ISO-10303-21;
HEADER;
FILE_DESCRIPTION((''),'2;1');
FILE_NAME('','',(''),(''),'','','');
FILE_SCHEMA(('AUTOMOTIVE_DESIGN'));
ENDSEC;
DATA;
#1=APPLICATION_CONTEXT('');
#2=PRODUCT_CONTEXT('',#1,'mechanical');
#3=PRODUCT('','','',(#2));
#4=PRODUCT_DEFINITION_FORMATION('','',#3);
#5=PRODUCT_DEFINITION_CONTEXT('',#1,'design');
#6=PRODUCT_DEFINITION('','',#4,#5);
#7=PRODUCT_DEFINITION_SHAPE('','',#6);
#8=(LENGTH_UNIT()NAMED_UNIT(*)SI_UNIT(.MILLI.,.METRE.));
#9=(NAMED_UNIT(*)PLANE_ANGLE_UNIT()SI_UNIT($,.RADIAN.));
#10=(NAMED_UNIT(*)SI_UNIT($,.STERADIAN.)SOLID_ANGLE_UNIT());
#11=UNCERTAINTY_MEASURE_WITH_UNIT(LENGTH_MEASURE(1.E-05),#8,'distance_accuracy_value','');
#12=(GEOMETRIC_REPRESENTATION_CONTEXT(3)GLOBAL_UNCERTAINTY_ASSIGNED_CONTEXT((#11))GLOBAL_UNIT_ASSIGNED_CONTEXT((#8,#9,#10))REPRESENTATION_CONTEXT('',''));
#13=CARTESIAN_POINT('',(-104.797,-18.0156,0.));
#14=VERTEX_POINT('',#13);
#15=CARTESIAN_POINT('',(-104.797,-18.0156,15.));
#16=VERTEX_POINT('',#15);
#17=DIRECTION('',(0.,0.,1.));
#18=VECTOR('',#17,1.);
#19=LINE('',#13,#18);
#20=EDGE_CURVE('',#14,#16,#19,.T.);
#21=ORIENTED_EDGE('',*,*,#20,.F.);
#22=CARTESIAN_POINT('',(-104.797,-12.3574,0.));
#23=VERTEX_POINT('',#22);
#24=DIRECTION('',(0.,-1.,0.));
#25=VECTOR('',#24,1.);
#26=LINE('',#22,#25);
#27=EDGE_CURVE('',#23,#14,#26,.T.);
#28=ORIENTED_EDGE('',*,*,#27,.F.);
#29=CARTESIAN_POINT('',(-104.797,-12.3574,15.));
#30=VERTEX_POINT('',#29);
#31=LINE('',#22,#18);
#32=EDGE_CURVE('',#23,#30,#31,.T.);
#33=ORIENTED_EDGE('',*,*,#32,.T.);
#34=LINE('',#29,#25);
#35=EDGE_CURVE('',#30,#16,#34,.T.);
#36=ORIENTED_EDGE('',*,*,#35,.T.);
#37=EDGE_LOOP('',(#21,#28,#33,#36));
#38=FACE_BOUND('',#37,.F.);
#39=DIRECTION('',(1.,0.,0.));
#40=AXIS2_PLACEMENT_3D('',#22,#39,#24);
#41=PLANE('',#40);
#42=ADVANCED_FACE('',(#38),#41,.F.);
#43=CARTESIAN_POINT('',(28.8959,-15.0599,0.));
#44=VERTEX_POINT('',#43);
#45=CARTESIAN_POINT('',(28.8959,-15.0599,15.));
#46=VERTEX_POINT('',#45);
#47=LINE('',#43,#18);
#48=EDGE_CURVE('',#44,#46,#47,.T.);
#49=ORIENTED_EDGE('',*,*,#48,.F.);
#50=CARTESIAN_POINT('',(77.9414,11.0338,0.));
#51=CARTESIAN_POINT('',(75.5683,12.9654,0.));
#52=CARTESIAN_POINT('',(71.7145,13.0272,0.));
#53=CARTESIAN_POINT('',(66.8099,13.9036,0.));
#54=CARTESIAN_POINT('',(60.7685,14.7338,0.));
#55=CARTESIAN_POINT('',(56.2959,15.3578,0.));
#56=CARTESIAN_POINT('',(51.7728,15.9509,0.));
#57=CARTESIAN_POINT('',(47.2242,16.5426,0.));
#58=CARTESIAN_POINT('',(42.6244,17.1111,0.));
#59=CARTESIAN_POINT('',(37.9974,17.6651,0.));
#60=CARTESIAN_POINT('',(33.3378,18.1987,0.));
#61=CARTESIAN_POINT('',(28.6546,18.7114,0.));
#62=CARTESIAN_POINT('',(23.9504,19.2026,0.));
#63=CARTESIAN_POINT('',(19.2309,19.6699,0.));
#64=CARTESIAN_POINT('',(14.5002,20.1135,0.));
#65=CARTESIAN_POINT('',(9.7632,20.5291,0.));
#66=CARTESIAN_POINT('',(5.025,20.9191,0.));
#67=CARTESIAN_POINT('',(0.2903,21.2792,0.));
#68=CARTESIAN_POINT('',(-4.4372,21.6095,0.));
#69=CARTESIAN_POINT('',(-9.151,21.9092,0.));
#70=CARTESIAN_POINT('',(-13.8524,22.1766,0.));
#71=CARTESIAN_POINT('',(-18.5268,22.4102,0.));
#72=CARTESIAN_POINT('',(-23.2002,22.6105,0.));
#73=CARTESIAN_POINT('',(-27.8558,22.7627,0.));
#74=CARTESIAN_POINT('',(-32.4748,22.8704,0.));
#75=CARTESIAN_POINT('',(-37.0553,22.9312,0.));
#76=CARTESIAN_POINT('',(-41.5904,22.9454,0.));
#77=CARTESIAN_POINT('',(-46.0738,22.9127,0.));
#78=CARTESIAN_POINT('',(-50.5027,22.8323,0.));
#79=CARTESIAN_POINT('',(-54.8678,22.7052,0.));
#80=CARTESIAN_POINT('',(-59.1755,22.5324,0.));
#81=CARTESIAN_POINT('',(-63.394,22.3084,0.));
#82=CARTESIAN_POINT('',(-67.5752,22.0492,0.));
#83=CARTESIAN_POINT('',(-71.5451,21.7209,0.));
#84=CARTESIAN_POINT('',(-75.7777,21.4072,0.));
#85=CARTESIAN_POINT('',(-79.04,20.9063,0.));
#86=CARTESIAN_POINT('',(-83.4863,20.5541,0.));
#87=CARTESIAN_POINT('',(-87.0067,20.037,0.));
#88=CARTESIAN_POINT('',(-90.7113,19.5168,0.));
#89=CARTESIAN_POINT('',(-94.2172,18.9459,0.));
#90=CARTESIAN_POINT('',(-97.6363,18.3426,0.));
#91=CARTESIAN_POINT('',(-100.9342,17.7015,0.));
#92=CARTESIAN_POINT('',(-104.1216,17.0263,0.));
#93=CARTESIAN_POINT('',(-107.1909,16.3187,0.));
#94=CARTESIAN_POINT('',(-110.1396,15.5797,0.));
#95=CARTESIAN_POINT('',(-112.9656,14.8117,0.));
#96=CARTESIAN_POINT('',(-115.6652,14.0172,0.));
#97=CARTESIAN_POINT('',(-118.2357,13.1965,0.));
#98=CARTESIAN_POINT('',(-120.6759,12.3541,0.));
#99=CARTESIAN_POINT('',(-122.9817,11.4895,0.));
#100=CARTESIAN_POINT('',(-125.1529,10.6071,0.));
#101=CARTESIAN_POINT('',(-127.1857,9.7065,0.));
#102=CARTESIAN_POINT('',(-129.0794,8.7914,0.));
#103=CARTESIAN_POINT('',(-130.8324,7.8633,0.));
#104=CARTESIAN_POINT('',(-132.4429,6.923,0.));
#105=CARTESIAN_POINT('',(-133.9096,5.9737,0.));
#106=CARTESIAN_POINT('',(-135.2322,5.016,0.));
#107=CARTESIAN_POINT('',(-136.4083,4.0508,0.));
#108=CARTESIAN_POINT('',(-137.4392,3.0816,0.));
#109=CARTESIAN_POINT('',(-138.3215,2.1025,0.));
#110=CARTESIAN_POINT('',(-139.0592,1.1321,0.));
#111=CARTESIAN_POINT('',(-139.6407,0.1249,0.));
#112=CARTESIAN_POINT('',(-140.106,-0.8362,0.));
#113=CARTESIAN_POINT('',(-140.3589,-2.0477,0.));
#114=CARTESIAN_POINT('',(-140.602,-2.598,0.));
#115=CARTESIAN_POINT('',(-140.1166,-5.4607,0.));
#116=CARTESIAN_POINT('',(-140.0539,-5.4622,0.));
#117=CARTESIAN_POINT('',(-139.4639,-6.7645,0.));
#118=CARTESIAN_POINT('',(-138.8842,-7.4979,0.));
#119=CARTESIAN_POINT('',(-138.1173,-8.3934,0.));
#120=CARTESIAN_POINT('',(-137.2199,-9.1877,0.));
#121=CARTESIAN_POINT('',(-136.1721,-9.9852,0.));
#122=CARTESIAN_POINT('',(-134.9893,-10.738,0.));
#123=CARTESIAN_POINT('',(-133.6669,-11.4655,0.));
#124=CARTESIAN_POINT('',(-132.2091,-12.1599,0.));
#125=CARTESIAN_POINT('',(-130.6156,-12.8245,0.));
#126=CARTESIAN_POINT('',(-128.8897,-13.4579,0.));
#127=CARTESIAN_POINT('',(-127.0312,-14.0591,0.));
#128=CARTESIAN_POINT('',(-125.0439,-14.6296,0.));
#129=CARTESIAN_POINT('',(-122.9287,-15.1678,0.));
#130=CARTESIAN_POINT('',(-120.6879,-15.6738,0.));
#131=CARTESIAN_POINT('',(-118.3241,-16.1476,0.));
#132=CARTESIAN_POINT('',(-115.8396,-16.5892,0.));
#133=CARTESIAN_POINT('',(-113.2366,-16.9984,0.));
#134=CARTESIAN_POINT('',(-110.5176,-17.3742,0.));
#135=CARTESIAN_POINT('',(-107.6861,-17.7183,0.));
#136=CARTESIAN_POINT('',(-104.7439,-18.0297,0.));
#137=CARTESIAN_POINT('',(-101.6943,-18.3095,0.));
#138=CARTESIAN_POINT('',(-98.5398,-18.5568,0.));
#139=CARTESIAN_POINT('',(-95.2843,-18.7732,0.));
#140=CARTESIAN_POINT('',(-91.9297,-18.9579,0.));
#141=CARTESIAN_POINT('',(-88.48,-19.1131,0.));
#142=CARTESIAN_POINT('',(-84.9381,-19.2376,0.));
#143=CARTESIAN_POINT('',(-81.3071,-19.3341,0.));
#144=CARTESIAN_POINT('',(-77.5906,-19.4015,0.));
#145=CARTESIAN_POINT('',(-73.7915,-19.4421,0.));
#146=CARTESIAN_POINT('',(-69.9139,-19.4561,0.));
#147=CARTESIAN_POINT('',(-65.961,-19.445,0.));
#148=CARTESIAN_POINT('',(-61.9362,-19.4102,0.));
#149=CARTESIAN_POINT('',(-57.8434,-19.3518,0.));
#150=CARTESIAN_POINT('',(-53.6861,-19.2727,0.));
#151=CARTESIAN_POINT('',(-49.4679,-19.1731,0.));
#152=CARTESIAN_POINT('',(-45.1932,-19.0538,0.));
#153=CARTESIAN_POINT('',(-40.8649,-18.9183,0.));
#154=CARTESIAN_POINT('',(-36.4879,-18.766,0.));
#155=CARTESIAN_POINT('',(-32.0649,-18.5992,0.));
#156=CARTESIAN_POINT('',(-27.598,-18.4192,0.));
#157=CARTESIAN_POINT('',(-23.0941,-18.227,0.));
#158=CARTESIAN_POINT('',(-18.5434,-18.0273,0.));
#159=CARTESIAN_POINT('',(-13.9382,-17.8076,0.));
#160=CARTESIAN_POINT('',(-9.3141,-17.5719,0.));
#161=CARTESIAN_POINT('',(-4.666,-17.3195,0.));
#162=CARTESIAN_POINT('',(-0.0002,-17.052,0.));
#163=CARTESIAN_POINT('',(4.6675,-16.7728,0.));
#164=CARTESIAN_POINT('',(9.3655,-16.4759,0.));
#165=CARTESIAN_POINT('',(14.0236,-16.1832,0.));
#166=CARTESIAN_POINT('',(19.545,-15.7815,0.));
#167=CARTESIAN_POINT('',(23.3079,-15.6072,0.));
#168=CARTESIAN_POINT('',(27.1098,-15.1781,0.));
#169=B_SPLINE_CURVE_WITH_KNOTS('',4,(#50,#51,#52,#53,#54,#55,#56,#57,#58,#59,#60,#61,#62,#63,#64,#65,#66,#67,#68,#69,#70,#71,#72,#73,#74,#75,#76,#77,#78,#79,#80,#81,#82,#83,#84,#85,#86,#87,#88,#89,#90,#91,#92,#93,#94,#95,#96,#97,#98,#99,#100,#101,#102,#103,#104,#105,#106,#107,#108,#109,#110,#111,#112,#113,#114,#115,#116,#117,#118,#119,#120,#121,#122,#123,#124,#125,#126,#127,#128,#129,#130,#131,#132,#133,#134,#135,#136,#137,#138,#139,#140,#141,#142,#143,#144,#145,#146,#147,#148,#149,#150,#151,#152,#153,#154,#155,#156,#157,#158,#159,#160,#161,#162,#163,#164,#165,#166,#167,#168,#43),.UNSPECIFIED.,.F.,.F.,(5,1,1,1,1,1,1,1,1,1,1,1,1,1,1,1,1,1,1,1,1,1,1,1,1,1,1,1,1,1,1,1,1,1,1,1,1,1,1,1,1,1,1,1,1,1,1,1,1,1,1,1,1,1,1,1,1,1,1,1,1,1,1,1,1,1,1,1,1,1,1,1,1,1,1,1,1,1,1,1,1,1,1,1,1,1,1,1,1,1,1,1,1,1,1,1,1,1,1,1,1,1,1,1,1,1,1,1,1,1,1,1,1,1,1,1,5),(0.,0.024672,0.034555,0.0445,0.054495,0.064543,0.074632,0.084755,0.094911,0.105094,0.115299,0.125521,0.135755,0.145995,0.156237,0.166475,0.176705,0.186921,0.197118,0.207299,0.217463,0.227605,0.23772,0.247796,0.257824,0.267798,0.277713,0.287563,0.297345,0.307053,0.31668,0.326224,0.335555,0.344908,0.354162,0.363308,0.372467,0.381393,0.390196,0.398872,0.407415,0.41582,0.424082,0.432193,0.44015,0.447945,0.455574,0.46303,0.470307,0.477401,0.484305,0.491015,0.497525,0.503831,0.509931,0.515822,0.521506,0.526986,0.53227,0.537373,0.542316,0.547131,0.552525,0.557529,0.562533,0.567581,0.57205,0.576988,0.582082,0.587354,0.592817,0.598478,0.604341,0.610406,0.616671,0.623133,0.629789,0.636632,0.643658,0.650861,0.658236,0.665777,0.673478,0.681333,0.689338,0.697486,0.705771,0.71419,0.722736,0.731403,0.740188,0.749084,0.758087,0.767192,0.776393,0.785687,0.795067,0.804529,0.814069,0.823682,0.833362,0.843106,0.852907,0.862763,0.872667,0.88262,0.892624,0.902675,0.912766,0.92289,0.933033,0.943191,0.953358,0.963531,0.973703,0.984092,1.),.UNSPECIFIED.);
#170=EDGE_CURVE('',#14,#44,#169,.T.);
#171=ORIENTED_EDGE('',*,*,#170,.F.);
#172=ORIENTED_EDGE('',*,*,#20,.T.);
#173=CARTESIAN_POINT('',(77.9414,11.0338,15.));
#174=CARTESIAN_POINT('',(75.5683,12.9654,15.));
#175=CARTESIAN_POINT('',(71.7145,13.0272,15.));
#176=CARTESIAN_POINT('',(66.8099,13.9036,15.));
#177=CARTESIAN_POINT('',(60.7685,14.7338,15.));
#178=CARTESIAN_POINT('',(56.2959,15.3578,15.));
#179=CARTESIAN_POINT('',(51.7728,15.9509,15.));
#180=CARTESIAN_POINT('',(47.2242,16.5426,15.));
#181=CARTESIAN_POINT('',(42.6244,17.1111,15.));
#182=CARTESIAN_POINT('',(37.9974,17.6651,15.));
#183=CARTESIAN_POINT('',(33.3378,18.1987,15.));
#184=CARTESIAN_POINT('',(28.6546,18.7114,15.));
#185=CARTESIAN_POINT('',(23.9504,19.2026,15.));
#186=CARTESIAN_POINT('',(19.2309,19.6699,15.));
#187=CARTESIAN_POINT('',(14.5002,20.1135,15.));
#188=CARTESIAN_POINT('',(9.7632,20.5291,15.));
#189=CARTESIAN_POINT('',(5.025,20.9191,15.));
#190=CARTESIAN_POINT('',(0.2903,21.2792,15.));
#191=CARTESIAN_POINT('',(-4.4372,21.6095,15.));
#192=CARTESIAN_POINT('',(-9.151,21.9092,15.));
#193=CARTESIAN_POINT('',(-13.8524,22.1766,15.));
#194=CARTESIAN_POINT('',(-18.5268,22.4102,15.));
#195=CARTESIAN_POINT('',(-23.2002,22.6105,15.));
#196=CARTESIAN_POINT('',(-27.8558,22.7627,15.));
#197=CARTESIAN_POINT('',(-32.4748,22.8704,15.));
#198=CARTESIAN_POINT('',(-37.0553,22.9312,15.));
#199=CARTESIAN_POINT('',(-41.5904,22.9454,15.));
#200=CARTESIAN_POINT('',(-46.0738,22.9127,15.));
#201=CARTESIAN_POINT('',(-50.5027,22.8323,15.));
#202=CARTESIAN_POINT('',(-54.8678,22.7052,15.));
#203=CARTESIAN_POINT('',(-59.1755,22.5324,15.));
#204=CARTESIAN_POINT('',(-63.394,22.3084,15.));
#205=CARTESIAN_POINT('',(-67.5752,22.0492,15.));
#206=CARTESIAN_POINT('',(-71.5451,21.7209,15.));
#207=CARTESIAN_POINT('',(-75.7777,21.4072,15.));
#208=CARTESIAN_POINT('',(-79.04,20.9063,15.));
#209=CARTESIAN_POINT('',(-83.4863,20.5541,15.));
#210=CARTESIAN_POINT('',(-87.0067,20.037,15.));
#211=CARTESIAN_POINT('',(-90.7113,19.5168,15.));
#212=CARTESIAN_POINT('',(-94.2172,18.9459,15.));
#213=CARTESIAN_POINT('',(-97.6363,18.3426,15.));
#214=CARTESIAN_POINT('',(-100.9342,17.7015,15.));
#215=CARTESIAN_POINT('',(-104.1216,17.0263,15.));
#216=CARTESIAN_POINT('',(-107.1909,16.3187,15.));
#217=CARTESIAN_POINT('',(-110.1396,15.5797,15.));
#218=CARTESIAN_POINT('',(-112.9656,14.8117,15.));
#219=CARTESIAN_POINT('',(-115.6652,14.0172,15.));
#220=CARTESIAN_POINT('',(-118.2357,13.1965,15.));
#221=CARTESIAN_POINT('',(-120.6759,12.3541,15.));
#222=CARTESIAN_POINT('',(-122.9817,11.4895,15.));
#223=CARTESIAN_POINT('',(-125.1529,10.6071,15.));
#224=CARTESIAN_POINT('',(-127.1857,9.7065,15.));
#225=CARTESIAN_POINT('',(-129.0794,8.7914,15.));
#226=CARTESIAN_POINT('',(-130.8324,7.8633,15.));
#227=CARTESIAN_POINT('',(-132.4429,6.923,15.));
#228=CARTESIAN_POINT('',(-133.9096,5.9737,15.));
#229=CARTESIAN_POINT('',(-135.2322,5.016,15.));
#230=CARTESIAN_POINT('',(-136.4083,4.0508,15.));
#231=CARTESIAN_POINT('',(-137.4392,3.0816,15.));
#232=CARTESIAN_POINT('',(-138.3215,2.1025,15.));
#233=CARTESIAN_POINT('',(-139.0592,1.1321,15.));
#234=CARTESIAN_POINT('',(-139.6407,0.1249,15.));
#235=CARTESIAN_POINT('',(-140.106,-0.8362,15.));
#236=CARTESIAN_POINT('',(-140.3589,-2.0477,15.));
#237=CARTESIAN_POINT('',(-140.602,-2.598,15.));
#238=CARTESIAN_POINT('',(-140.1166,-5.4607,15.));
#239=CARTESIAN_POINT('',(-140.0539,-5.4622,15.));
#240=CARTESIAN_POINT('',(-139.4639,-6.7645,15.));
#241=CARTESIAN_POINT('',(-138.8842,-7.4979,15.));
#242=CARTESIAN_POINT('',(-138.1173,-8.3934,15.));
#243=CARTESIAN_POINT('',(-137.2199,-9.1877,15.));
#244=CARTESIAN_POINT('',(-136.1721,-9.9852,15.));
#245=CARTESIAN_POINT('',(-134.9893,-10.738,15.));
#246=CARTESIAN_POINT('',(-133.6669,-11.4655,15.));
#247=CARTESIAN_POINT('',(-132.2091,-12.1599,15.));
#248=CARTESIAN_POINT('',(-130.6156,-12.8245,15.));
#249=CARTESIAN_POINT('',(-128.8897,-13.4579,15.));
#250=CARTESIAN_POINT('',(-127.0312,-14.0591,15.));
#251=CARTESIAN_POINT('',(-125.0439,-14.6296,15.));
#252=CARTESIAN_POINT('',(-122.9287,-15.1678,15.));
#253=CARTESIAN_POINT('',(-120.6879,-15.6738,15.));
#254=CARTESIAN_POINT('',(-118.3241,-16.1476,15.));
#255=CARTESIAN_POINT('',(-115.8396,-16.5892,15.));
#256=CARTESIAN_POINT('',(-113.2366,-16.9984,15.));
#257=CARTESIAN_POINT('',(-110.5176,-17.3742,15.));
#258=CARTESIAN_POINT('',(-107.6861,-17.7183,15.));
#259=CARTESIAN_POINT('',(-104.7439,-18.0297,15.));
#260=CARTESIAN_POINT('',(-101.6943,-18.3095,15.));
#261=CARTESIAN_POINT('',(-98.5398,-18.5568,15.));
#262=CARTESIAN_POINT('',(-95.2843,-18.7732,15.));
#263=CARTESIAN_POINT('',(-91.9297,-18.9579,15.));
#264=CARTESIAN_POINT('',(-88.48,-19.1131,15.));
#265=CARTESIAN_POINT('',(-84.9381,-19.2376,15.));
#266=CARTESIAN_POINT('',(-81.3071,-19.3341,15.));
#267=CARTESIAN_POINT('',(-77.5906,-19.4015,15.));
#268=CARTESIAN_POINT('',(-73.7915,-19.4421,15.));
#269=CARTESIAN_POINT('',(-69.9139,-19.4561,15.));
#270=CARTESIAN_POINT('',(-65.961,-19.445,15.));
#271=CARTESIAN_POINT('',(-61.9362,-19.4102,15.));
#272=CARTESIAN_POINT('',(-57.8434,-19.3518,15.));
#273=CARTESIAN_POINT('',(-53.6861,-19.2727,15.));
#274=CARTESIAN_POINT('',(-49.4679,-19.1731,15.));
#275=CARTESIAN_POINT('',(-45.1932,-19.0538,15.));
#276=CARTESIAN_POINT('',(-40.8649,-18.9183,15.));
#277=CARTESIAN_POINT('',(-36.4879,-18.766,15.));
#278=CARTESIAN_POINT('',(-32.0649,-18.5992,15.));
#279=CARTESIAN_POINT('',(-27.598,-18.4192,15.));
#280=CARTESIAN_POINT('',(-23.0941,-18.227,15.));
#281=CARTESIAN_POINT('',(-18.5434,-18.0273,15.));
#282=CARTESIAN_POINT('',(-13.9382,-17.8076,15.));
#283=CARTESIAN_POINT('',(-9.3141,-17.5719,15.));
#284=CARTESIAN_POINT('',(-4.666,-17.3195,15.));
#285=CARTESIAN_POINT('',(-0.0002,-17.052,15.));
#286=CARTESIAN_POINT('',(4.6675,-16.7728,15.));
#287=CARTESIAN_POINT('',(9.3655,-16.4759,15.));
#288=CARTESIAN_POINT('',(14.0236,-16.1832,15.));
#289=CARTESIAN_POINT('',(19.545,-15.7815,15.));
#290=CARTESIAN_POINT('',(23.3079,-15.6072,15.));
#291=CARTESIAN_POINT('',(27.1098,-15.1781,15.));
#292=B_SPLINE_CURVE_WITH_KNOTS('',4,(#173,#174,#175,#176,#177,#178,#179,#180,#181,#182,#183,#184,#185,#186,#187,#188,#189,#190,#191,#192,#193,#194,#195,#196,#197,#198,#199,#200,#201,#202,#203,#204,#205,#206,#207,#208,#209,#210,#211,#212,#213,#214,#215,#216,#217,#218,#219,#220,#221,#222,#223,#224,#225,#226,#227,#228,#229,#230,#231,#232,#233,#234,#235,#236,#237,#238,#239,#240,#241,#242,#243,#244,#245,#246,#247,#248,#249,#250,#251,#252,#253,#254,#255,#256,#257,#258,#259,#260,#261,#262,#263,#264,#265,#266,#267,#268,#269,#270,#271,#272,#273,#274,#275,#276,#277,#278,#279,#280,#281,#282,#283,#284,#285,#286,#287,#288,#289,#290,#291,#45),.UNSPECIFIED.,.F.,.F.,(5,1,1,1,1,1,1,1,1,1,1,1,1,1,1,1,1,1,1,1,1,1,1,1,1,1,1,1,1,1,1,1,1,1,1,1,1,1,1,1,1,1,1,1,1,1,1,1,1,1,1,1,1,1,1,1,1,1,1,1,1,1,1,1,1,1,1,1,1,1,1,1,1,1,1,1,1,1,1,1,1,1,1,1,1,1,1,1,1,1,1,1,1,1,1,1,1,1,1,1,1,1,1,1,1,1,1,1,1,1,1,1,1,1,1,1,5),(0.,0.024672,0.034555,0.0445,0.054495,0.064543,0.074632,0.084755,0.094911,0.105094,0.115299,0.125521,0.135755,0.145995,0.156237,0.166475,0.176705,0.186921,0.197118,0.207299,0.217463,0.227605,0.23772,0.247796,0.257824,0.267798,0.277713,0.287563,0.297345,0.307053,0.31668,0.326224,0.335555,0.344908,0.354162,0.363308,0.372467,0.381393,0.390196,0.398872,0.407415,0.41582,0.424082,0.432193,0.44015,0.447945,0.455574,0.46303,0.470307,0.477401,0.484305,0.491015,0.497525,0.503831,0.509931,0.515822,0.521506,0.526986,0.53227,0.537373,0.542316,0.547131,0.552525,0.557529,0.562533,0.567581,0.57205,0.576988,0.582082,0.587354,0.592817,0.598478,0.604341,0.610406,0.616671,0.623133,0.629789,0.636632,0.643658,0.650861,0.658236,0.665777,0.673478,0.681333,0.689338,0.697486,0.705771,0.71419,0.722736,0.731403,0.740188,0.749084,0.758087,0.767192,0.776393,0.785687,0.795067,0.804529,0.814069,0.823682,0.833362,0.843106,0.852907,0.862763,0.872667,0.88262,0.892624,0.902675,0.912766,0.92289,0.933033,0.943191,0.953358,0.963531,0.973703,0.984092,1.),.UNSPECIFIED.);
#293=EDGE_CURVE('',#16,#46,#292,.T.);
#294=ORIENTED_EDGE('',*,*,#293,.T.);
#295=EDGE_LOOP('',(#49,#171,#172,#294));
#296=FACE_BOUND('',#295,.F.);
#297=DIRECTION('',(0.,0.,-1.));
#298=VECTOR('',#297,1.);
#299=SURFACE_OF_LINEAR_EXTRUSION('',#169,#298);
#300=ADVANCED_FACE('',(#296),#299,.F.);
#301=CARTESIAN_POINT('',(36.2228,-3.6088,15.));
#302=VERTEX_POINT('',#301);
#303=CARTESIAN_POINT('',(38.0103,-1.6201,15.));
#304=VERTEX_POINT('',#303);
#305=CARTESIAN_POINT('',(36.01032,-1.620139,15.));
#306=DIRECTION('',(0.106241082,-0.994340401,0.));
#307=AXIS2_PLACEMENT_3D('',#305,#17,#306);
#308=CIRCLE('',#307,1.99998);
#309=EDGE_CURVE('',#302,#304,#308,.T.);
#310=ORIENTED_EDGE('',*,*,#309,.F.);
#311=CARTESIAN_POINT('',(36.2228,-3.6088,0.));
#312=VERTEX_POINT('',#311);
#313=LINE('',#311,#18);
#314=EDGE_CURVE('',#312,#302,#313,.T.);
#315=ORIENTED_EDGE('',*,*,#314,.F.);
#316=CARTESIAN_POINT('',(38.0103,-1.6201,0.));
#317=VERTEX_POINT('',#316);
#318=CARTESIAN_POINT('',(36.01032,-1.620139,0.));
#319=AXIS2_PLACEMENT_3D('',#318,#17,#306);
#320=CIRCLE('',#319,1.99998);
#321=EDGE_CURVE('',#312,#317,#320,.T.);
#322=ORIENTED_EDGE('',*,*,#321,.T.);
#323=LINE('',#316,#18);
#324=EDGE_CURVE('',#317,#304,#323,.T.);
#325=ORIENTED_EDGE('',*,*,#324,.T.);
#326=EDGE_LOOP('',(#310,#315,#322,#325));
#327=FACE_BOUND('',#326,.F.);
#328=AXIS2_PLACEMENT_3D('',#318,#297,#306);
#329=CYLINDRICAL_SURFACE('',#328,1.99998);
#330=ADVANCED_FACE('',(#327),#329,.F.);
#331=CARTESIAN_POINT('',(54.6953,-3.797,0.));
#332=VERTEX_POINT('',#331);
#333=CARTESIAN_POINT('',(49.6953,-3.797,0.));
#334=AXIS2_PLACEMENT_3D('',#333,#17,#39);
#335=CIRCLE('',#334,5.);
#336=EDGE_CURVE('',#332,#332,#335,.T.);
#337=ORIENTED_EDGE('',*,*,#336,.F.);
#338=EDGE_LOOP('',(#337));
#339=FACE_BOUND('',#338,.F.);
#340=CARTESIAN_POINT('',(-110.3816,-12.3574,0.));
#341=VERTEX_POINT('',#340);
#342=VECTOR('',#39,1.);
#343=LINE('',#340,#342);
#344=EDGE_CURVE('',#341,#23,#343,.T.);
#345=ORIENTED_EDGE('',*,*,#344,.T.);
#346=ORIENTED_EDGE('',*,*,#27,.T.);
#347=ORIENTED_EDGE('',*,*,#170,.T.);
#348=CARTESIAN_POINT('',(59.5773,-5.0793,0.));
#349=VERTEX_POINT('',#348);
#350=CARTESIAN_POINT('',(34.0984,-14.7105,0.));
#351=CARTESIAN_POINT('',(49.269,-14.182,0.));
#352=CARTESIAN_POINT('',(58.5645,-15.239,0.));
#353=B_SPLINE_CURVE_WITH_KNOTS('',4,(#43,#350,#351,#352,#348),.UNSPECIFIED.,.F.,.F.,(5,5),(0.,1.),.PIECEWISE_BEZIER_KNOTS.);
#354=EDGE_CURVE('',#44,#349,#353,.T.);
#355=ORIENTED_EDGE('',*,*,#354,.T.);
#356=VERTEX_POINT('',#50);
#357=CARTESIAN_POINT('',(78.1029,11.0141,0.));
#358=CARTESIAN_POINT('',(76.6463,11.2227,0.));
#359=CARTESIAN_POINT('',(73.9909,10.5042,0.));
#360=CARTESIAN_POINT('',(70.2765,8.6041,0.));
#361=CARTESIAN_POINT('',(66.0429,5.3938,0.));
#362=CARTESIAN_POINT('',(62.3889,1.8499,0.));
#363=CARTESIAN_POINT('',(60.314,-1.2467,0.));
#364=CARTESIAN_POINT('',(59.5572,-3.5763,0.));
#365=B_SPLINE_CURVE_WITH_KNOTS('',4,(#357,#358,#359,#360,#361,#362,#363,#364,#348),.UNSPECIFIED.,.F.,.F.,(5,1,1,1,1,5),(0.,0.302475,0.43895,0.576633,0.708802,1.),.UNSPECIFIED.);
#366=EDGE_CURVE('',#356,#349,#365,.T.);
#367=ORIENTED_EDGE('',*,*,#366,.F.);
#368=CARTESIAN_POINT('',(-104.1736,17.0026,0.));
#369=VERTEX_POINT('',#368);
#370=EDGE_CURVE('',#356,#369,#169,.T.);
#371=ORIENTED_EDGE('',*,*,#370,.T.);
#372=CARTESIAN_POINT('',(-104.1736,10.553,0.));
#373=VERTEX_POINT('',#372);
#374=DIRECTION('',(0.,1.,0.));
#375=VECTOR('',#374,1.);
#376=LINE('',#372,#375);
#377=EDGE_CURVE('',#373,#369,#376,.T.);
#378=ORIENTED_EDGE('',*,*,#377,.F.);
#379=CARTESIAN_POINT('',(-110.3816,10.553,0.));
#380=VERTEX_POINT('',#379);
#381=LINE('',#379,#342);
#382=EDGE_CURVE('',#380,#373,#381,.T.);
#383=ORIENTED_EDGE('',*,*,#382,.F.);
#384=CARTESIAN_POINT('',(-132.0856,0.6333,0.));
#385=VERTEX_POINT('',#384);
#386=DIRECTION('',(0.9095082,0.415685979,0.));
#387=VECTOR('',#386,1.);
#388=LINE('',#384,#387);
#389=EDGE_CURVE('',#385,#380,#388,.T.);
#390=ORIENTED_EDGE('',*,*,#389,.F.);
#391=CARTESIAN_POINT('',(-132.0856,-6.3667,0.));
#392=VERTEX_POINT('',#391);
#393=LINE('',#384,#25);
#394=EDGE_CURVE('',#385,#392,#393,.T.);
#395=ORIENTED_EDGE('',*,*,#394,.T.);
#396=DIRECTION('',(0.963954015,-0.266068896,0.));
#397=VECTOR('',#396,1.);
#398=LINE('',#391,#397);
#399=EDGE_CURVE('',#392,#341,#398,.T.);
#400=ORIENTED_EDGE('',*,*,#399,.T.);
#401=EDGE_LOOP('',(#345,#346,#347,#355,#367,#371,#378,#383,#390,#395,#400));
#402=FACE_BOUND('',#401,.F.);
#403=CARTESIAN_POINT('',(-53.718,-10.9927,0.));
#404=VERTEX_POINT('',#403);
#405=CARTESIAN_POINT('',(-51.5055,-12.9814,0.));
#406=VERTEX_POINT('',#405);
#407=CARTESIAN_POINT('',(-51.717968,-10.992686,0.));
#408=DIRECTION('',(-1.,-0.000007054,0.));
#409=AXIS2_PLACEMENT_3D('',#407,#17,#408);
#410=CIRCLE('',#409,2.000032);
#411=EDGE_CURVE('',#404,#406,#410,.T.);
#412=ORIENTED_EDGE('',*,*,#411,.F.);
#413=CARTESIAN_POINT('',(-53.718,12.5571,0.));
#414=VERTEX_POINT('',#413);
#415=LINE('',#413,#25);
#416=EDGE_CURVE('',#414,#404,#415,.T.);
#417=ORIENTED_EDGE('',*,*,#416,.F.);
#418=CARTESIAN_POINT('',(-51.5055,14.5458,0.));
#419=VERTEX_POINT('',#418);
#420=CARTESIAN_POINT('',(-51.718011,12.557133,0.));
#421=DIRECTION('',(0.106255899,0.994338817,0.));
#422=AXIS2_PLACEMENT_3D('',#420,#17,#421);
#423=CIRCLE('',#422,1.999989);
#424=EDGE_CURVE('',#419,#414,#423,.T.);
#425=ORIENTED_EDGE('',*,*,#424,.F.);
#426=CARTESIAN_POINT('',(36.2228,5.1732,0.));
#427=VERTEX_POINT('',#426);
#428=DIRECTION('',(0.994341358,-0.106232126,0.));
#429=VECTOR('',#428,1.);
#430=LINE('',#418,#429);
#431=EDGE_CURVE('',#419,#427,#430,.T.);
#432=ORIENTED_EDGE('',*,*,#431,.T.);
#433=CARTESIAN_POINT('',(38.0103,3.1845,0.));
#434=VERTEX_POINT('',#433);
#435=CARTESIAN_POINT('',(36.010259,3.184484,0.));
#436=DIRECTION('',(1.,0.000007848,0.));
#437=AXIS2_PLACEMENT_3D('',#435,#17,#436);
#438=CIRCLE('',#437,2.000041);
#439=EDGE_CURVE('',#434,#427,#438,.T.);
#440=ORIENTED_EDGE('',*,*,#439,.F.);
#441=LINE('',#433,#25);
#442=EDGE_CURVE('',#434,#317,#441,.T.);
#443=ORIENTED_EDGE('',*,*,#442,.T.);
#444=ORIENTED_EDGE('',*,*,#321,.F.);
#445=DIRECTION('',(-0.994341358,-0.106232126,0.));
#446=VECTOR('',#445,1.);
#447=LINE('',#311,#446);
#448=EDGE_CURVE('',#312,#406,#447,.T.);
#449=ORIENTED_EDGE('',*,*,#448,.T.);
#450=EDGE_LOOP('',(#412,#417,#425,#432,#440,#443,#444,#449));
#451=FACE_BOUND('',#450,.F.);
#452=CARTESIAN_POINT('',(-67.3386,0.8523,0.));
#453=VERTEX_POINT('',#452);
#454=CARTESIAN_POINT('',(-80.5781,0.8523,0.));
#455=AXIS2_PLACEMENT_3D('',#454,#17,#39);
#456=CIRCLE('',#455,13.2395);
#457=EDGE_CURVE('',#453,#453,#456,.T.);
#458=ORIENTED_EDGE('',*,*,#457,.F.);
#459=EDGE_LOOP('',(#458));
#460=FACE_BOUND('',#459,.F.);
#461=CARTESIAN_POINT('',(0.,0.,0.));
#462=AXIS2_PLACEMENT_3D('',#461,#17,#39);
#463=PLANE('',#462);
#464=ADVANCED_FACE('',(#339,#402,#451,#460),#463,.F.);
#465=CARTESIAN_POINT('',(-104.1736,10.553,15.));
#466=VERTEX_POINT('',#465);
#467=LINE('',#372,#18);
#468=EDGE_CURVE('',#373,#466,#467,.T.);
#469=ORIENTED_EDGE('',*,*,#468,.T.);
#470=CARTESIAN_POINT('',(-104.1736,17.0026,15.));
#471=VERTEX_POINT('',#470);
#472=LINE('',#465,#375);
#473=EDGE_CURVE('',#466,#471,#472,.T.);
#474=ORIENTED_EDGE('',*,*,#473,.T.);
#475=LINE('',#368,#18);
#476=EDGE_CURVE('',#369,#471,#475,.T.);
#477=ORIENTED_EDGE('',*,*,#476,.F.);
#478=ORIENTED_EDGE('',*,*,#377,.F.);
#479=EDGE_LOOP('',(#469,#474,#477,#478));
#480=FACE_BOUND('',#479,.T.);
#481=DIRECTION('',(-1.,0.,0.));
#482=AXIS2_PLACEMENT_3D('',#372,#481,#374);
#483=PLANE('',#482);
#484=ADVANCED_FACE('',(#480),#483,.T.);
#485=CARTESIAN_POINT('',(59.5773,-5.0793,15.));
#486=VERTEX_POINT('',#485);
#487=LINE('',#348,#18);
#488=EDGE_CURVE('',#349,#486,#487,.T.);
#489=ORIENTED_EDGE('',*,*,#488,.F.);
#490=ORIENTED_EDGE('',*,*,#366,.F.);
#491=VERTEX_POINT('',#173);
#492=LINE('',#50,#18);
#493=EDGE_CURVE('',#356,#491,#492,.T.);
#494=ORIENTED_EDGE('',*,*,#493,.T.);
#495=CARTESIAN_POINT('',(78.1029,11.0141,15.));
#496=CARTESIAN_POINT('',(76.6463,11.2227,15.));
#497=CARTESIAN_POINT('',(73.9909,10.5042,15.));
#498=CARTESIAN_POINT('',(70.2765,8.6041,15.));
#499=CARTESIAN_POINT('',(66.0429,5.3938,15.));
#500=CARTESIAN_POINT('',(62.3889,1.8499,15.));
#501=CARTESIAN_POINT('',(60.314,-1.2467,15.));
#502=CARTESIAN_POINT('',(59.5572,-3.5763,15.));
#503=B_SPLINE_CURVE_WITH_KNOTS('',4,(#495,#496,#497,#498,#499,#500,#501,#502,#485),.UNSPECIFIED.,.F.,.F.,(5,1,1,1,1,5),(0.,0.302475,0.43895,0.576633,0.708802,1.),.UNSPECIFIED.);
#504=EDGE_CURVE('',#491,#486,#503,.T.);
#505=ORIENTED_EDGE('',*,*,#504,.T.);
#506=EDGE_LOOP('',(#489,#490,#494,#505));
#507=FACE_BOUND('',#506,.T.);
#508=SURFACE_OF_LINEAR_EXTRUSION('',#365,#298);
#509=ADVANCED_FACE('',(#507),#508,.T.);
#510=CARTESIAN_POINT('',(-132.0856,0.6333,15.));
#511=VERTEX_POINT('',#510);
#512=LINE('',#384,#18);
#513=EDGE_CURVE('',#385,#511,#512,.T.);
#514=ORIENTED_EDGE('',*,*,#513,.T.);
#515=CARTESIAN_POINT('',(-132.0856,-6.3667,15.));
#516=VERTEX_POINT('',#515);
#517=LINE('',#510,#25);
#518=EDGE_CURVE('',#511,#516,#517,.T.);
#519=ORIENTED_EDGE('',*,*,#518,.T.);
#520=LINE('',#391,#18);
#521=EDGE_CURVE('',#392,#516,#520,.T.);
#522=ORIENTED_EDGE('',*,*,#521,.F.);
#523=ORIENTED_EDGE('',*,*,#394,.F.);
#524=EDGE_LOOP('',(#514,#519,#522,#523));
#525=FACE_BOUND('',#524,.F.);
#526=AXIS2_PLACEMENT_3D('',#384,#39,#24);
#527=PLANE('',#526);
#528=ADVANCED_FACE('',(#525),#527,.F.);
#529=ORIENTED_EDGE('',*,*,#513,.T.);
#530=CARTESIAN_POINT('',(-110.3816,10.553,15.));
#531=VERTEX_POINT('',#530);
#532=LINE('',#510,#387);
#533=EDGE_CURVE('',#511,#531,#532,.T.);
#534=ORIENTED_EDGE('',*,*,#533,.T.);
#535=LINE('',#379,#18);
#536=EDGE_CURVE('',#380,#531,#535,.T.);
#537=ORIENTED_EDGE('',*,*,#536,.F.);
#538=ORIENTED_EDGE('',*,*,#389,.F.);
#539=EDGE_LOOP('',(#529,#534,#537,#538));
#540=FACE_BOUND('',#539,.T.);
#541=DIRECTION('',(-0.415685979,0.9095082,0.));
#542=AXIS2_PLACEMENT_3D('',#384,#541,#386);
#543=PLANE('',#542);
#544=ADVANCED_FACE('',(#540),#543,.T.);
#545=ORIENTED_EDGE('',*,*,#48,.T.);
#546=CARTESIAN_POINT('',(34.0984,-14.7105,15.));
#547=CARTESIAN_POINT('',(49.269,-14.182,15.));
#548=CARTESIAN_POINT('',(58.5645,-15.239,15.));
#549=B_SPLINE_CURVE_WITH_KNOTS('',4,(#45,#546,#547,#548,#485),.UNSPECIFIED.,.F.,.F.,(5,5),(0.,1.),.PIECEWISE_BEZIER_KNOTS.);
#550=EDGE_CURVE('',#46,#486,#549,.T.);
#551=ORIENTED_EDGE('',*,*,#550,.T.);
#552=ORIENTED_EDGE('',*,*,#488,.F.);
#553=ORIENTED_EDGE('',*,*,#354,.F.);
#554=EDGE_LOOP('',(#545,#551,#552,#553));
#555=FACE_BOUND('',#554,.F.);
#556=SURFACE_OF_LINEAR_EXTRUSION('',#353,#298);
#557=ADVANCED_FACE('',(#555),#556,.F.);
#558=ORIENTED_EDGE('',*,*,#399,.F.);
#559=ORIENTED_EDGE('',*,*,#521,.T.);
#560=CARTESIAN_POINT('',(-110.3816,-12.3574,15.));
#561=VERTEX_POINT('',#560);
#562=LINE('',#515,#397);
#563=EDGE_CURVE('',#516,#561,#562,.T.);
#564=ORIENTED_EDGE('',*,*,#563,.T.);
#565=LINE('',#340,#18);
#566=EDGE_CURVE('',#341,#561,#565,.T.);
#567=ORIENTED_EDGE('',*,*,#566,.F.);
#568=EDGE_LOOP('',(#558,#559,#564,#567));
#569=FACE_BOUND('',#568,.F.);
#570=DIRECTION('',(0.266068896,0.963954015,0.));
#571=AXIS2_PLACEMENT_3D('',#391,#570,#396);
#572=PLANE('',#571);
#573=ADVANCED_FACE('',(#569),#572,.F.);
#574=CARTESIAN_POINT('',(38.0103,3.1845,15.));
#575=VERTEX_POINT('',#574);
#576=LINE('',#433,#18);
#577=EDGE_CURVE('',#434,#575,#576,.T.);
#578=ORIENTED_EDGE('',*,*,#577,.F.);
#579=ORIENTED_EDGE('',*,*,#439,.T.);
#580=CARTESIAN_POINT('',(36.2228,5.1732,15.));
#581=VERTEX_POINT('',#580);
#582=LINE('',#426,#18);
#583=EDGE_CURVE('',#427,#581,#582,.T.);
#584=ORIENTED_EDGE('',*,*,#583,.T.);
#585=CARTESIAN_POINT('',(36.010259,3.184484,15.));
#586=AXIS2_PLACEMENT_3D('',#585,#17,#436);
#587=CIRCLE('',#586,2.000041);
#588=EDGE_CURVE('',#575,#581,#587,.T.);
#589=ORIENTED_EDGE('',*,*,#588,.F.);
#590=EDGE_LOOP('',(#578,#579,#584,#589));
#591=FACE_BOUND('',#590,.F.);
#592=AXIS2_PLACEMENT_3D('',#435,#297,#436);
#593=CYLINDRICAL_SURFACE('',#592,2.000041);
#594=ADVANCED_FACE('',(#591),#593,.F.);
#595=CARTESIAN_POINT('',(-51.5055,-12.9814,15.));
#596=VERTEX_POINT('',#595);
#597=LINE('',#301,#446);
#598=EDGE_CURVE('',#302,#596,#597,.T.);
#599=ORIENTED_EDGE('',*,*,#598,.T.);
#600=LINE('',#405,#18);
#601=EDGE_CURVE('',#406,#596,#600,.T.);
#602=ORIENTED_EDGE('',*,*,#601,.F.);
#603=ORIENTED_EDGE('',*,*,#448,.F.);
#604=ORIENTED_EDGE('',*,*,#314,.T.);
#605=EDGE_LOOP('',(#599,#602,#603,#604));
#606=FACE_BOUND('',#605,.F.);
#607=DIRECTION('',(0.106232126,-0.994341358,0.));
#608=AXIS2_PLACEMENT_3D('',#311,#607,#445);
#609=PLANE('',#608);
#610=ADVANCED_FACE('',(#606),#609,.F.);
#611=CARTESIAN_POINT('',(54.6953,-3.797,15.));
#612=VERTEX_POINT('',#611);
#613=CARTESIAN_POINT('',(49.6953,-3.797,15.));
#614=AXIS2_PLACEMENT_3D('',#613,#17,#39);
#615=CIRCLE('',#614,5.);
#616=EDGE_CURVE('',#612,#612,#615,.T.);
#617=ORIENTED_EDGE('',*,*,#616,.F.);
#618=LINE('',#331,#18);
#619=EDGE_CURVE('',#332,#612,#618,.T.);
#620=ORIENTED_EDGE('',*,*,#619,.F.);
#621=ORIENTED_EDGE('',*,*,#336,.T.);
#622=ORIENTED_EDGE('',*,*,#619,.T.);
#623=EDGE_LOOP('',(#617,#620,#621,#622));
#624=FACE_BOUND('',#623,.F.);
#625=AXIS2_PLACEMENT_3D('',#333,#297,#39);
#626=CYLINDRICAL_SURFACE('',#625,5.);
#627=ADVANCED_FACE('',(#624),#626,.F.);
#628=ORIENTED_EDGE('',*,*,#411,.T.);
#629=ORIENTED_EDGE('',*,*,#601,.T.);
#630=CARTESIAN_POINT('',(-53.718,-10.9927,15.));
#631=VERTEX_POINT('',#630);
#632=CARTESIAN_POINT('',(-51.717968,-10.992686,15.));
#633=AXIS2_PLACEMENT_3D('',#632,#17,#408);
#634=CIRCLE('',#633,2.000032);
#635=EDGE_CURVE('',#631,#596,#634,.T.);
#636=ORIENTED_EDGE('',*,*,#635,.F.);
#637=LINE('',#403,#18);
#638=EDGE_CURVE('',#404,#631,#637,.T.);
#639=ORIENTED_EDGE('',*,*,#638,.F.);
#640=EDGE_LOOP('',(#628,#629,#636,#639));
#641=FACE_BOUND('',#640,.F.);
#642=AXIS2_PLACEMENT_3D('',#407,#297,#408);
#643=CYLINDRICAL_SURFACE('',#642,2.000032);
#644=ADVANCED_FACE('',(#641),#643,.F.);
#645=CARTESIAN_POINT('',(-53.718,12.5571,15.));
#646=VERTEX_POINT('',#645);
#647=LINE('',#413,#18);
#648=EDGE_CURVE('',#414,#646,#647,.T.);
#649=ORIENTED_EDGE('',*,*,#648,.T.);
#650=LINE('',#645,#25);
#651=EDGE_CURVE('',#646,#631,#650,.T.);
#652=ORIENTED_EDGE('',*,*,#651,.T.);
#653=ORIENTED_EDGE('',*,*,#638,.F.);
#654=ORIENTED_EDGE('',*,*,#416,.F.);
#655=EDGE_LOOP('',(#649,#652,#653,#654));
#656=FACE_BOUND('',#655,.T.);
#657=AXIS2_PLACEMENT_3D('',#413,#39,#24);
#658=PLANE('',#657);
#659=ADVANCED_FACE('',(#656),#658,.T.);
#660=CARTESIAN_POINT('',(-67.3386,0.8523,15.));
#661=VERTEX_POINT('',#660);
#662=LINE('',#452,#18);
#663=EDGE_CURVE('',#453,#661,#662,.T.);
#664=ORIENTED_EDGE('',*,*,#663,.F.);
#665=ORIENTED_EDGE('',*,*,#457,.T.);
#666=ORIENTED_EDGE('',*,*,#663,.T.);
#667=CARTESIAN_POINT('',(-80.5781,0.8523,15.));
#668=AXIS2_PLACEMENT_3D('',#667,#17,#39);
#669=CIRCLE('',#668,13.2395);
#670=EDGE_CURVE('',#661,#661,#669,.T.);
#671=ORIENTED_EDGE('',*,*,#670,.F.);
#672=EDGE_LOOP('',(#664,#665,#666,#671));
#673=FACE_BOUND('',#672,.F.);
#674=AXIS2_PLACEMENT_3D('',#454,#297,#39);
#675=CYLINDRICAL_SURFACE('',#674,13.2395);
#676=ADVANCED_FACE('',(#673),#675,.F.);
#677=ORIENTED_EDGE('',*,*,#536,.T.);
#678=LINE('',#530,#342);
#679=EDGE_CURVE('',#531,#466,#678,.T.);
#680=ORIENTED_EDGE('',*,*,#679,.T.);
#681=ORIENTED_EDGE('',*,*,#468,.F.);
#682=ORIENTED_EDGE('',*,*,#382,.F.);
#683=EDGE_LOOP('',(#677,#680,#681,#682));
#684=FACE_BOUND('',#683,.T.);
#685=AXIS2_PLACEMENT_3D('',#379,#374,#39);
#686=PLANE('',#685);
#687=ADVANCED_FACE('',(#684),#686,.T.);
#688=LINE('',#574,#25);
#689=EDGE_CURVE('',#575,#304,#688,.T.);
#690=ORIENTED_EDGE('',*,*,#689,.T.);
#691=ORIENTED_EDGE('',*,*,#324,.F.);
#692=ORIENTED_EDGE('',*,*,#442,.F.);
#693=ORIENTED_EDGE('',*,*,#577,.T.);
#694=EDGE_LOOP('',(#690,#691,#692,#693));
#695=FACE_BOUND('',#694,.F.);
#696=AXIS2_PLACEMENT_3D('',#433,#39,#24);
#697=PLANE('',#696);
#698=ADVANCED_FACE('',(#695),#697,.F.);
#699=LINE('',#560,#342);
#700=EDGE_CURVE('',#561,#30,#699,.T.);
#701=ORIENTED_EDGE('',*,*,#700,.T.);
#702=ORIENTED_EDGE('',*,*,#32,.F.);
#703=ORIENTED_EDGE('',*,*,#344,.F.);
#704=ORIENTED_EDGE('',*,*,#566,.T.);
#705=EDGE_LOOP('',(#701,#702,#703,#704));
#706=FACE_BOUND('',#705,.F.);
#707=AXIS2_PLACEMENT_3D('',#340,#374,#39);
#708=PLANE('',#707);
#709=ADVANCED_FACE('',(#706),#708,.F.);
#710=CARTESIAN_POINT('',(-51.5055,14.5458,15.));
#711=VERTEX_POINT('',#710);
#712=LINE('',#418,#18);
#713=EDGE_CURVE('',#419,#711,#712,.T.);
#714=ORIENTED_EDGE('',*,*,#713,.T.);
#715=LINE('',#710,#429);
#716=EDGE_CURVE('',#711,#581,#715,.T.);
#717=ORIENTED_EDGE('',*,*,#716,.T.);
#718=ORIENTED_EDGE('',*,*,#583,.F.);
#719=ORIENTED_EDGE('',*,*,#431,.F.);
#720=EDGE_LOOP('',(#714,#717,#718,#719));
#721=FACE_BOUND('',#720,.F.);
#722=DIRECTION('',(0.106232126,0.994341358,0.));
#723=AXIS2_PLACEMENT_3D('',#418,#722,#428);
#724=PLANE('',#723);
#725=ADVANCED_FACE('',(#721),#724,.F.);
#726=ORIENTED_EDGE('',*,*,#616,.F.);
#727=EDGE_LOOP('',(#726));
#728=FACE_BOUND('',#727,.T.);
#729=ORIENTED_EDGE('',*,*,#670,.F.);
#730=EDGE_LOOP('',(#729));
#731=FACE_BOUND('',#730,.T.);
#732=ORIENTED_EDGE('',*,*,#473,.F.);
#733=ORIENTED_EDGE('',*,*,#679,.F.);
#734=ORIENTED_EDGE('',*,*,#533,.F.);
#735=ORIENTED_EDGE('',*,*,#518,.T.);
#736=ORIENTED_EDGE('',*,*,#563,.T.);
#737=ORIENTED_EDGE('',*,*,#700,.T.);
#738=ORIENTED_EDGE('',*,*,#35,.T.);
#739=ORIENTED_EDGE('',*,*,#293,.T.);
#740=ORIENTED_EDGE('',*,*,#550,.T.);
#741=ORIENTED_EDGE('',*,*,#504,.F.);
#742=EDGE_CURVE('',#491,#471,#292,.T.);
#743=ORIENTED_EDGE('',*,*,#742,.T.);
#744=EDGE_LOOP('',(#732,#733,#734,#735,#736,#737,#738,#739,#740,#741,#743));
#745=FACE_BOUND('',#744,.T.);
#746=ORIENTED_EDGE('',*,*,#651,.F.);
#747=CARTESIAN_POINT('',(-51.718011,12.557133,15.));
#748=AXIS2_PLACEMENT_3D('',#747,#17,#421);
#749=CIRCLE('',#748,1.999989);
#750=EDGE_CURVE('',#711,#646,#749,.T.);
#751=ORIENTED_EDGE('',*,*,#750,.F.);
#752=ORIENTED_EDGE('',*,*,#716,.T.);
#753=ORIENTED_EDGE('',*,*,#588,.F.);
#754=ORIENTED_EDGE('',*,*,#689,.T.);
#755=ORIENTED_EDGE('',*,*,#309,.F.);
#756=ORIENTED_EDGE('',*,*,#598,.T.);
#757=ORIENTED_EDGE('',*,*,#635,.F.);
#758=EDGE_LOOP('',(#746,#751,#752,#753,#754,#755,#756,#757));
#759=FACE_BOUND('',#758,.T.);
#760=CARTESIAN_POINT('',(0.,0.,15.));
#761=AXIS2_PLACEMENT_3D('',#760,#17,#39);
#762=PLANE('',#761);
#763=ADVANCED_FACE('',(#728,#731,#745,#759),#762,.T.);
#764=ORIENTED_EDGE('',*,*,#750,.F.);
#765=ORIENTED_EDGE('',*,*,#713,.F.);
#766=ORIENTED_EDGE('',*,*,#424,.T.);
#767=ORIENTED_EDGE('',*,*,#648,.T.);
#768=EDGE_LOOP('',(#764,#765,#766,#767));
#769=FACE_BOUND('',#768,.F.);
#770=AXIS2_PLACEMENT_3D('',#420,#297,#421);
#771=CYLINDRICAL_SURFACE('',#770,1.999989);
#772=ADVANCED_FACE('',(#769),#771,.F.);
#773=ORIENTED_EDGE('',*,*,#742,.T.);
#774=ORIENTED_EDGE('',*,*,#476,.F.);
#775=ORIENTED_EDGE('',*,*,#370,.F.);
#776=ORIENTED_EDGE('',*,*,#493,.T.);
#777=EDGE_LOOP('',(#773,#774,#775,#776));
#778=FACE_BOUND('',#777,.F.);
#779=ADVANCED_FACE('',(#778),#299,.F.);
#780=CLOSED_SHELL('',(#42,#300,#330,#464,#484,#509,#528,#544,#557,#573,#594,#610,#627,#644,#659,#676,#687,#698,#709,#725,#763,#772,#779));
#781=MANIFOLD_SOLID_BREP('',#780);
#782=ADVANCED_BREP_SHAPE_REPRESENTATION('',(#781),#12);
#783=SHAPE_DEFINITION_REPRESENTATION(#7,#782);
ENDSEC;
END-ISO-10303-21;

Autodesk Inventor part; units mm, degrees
ref_plane "YZ Plane" through (0, 0, 0) normal (1, 0, 0) x (0, 1, 0)
ref_plane "XZ Plane" through (0, 0, 0) normal (0, 1, 0) x (-1, 0, 0)
ref_plane "XY Plane" through (0, 0, 0) normal (0, 0, 1) x (1, 0, 0)
sketch "Sketch3" plane through (0, 0, 0) normal (0, 0, 1) x (1, 0, 0)
  line L0 (-80.5781, 0.8523) -> (-80.5781, 20.7988) construction
  circle A0 centre (-80.5781, 0.8523) radius 13.2395
  line L1 (-53.718, 12.5571) -> (-53.718, -10.9927)
  arc A1 (-53.718, -10.9927) -> (-51.5055, -12.9814) centre (-51.718, -10.9927) ccw
  arc A2 (-51.5055, 14.5458) -> (-53.718, 12.5571) centre (-51.718, 12.5571) ccw
  line L2 (36.2228, -3.6088) -> (-51.5055, -12.9814)
  line L3 (38.0103, 3.1845) -> (38.0103, -1.6201)
  line L4 (-80.5781, 0.8523) -> (49.5525, 0.8523) construction
  circle A3 centre (49.6953, -3.797) radius 5
  line L5 (59.6953, 14.884) -> (59.6953, -12.7998) construction
  spline S0 degree 4 poles (77.9414, 11.0338) (75.5683, 12.9654) (71.7145, 13.0272) (66.8099, 13.9036) (60.7685, 14.7338) (56.2959, 15.3578) (51.7728, 15.9509) (47.2242, 16.5426) (42.6244, 17.1111) (37.9974, 17.6651) (33.3378, 18.1987) (28.6546, 18.7114) (23.9504, 19.2026) (19.2309, 19.6699) (14.5002, 20.1135) (9.7632, 20.5291) (5.025, 20.9191) (0.2903, 21.2792) (-4.4372, 21.6095) (-9.151, 21.9092) (-13.8524, 22.1766) (-18.5268, 22.4102) (-23.2002, 22.6105) (-27.8558, 22.7627) (-32.4748, 22.8704) (-37.0553, 22.9312) (-41.5904, 22.9454) (-46.0738, 22.9127) (-50.5027, 22.8323) (-54.8678, 22.7052) (-59.1755, 22.5324) (-63.394, 22.3084) (-67.5752, 22.0492) (-71.5451, 21.7209) (-75.7777, 21.4072) (-79.04, 20.9063) (-83.4863, 20.5541) (-87.0067, 20.037) (-90.7113, 19.5168) (-94.2172, 18.9459) (-97.6363, 18.3426) (-100.9342, 17.7015) (-104.1216, 17.0263) (-107.1909, 16.3187) (-110.1396, 15.5797) (-112.9656, 14.8117) (-115.6652, 14.0172) (-118.2357, 13.1965) (-120.6759, 12.3541) (-122.9817, 11.4895) (-125.1529, 10.6071) (-127.1857, 9.7065) (-129.0794, 8.7914) (-130.8324, 7.8633) (-132.4429, 6.923) (-133.9096, 5.9737) (-135.2322, 5.016) (-136.4083, 4.0508) (-137.4392, 3.0816) (-138.3215, 2.1025) (-139.0592, 1.1321) (-139.6407, 0.1249) (-140.106, -0.8362) (-140.3589, -2.0477) (-140.602, -2.598) (-140.1166, -5.4607) (-140.0539, -5.4622) (-139.4639, -6.7645) (-138.8842, -7.4979) (-138.1173, -8.3934) (-137.2199, -9.1877) (-136.1721, -9.9852) (-134.9893, -10.738) (-133.6669, -11.4655) (-132.2091, -12.1599) (-130.6156, -12.8245) (-128.8897, -13.4579) (-127.0312, -14.0591) (-125.0439, -14.6296) (-122.9287, -15.1678) (-120.6879, -15.6738) (-118.3241, -16.1476) (-115.8396, -16.5892) (-113.2366, -16.9984) (-110.5176, -17.3742) (-107.6861, -17.7183) (-104.7439, -18.0297) (-101.6943, -18.3095) (-98.5398, -18.5568) (-95.2843, -18.7732) (-91.9297, -18.9579) (-88.48, -19.1131) (-84.9381, -19.2376) (-81.3071, -19.3341) (-77.5906, -19.4015) (-73.7915, -19.4421) (-69.9139, -19.4561) (-65.961, -19.445) (-61.9362, -19.4102) (-57.8434, -19.3518) (-53.6861, -19.2727) (-49.4679, -19.1731) (-45.1932, -19.0538) (-40.8649, -18.9183) (-36.4879, -18.766) (-32.0649, -18.5992) (-27.598, -18.4192) (-23.0941, -18.227) (-18.5434, -18.0273) (-13.9382, -17.8076) (-9.3141, -17.5719) (-4.666, -17.3195) (-0.0002, -17.052) (4.6675, -16.7728) (9.3655, -16.4759) (14.0236, -16.1832) (19.545, -15.7815) (23.3079, -15.6072) (27.1098, -15.1781) (28.8959, -15.0599) knots 0 0 0 0 0 0.024672 0.034555 0.0445 0.054495 0.064543 0.074632 0.084755 0.094911 0.105094 0.115299 0.125521 0.135755 0.145995 0.156237 0.166475 0.176705 0.186921 0.197118 0.207299 0.217463 0.227605 0.23772 0.247796 0.257824 0.267798 0.277713 0.287563 0.297345 0.307053 0.31668 0.326224 0.335555 0.344908 0.354162 0.363308 0.372467 0.381393 0.390196 0.398872 0.407415 0.41582 0.424082 0.432193 0.44015 0.447945 0.455574 0.46303 0.470307 0.477401 0.484305 0.491015 0.497525 0.503831 0.509931 0.515822 0.521506 0.526986 0.53227 0.537373 0.542316 0.547131 0.552525 0.557529 0.562533 0.567581 0.57205 0.576988 0.582082 0.587354 0.592817 0.598478 0.604341 0.610406 0.616671 0.623133 0.629789 0.636632 0.643658 0.650861 0.658236 0.665777 0.673478 0.681333 0.689338 0.697486 0.705771 0.71419 0.722736 0.731403 0.740188 0.749084 0.758087 0.767192 0.776393 0.785687 0.795067 0.804529 0.814069 0.823682 0.833362 0.843106 0.852907 0.862763 0.872667 0.88262 0.892624 0.902675 0.912766 0.92289 0.933033 0.943191 0.953358 0.963531 0.973703 0.984092 1 1 1 1 1
  line L6 (7.5013, -16.4763) -> (50.2906, -13.6435) construction
  arc A4 (44.8353, -17.2546) -> (13.385, -19.3367) centre (31.5327, -54.8885) ccw construction
  line L7 (159.6953, -3.8066) -> (59.6953, -3.8066) construction
  line L8 (-51.5055, 14.5458) -> (36.2228, 5.1732)
  arc A5 (36.2228, -3.6088) -> (38.0103, -1.6201) centre (36.0103, -1.6201) ccw
  arc A6 (38.0103, 3.1845) -> (36.2228, 5.1732) centre (36.0103, 3.1845) ccw
  spline S1 degree 4 poles (78.1029, 11.0141) (76.6463, 11.2227) (73.9909, 10.5042) (70.2765, 8.6041) (66.0429, 5.3938) (62.3889, 1.8499) (60.314, -1.2467) (59.5572, -3.5763) (59.5773, -5.0793) knots 0 0 0 0 0 0.302475 0.43895 0.576633 0.708802 1 1 1 1 1
  spline S2 degree 4 poles (28.8959, -15.0599) (34.0984, -14.7105) (49.269, -14.182) (58.5645, -15.239) (59.5773, -5.0793) knots 0 0 0 0 0 1 1 1 1 1
  line L9 (28.8959, -15.0599) -> (34.0984, -14.7105) construction
  line L10 (34.0984, -14.7105) -> (49.269, -14.182) construction
  line L11 (49.269, -14.182) -> (58.5645, -15.239) construction
  line L12 (58.5645, -15.239) -> (59.5773, -5.0793) construction
  line L13 (-140.4646, -2.8394) -> (159.4818, -3.8173) construction
  line L14 (-132.0856, 0.6333) -> (-132.0856, -6.3667)
  line L15 (-132.0856, -6.3667) -> (-110.3816, -12.3574)
  line L16 (-110.3816, -12.3574) -> (-104.797, -12.3574)
  line L17 (-104.797, -12.3574) -> (-104.797, -18.0156)
  line L18 (-132.0856, 0.6333) -> (-110.3816, 10.553)
  line L19 (-110.3816, 10.553) -> (-104.1736, 10.553)
  line L20 (-104.1736, 10.553) -> (-104.1736, 17.0026)
  point P0 (0, 0)
  point P1 (17.6589, 23.5628)
  point P2 (75.883, 10.8572)
  point P3 (72.8647, 9.7686)
  point P4 (69.4179, 7.8149)
  point P5 (66.0452, 5.2617)
  point P6 (63.1887, 2.4463)
  point P7 (61.1228, -0.3317)
  point P8 (59.9357, -2.8689)
  point P9 (-160.0931, -3.8671)
  point P10 (28.8959, -15.0599)
  point P11 (69.5533, 13.4647)
  point P12 (65.1899, 14.1023)
  point P13 (60.7936, 14.7318)
  point P14 (56.3207, 15.3468)
  point P15 (51.7945, 15.947)
  point P16 (47.2398, 16.5346)
  point P17 (42.6414, 17.1053)
  point P18 (38.0104, 17.6585)
  point P19 (33.3491, 18.1925)
  point P20 (28.6632, 18.7055)
  point P21 (23.9568, 19.1966)
  point P22 (19.2348, 19.6643)
  point P23 (14.5017, 20.1074)
  point P24 (9.7623, 20.5238)
  point P25 (5.0217, 20.9132)
  point P26 (0.2844, 21.2735)
  point P27 (-4.4451, 21.6038)
  point P28 (-9.1614, 21.9032)
  point P29 (-13.86, 22.1702)
  point P30 (-18.5361, 22.4036)
  point P31 (-23.211, 22.601)
  point P32 (-27.8721, 22.754)
  point P33 (-32.4966, 22.8611)
  point P34 (-37.0797, 22.9217)
  point P35 (-41.6169, 22.9356)
  point P36 (-46.1028, 22.9023)
  point P37 (-50.5329, 22.8216)
  point P38 (-54.9021, 22.6941)
  point P39 (-59.2065, 22.5195)
  point P40 (-63.4406, 22.2977)
  point P41 (-67.6008, 22.0302)
  point P42 (-71.6806, 21.7165)
  point P43 (-75.6814, 21.3591)
  point P44 (-79.1834, 20.9458)
  point P45 (-83.4048, 20.5095)
  point P46 (-87.1309, 20.023)
  point P47 (-90.7527, 19.494)
  point P48 (-94.2725, 18.9266)
  point P49 (-97.6845, 18.3211)
  point P50 (-100.9861, 17.6791)
  point P51 (-107.2438, 16.2934)
  point P52 (-110.1931, 15.553)
  point P53 (-113.0194, 14.7835)
  point P54 (-115.7191, 13.987)
  point P55 (-118.2898, 13.165)
  point P56 (-120.7294, 12.3201)
  point P57 (-123.0349, 11.454)
  point P58 (-125.2048, 10.569)
  point P59 (-127.2364, 9.6666)
  point P60 (-129.1282, 8.7491)
  point P61 (-130.8786, 7.8185)
  point P62 (-132.486, 6.8762)
  point P63 (-133.9488, 5.9245)
  point P64 (-135.2661, 4.9648)
  point P65 (-136.4363, 3.9987)
  point P66 (-137.4592, 3.0275)
  point P67 (-138.3336, 2.0531)
  point P68 (-139.0591, 1.0763)
  point P69 (-139.6352, 0.0983)
  point P70 (-140.0613, -0.8802)
  point P71 (-140.338, -1.8576)
  point P72 (-140.1239, -5.2398)
  point P73 (-139.9547, -5.7022)
  point P74 (-139.492, -6.6066)
  point P75 (-138.8844, -7.4823)
  point P76 (-138.1328, -8.3292)
  point P77 (-137.2384, -9.147)
  point P78 (-136.202, -9.9355)
  point P79 (-135.0249, -10.6943)
  point P80 (-133.7085, -11.4228)
  point P81 (-132.2548, -12.1206)
  point P82 (-130.6648, -12.7879)
  point P83 (-128.941, -13.4239)
  point P84 (-127.0846, -14.0282)
  point P85 (-125.0983, -14.6009)
  point P86 (-122.9839, -15.1415)
  point P87 (-120.7435, -15.6497)
  point P88 (-118.3798, -16.1256)
  point P89 (-115.8952, -16.569)
  point P90 (-113.2918, -16.9797)
  point P91 (-110.5723, -17.3574)
  point P92 (-107.74, -17.7027)
  point P93 (-101.7463, -18.2964)
  point P94 (-98.5909, -18.5451)
  point P95 (-95.3341, -18.7623)
  point P96 (-91.9783, -18.9484)
  point P97 (-88.5271, -19.1041)
  point P98 (-84.9838, -19.2298)
  point P99 (-81.3514, -19.3267)
  point P100 (-77.6332, -19.3951)
  point P101 (-73.8324, -19.4362)
  point P102 (-69.9531, -19.4509)
  point P103 (-65.9985, -19.4404)
  point P104 (-61.9719, -19.4059)
  point P105 (-57.8772, -19.3483)
  point P106 (-53.718, -19.2694)
  point P107 (-49.4979, -19.1701)
  point P108 (-45.2211, -19.0516)
  point P109 (-40.8909, -18.916)
  point P110 (-36.5118, -18.7642)
  point P111 (-32.0871, -18.5977)
  point P112 (-27.6213, -18.418)
  point P113 (-23.1183, -18.2269)
  point P114 (-18.5646, -18.0247)
  point P115 (-13.9566, -17.8054)
  point P116 (-9.3252, -17.5693)
  point P117 (-4.674, -17.317)
  point P118 (-0.0078, -17.05)
  point P119 (4.6686, -16.7695)
  point P120 (9.3513, -16.477)
  point P121 (14.0352, -16.1731)
  point P122 (18.7161, -15.8596)
  point P123 (23.3889, -15.5371)
  point P124 (78.0825, 12.164)
  point P125 (159.2574, -3.8401)
  point P126 (158.8836, -3.8779)
  point P127 (158.3607, -3.9307)
  point P128 (157.6896, -3.9985)
  point P129 (156.8706, -4.081)
  point P130 (155.9046, -4.1779)
  point P131 (154.7931, -4.2892)
  point P132 (153.5367, -4.4143)
  point P133 (152.1372, -4.5532)
  point P134 (150.5955, -4.7056)
  point P135 (148.914, -4.8712)
  point P136 (147.0936, -5.0494)
  point P137 (145.137, -5.2399)
  point P138 (143.0457, -5.4421)
  point P139 (140.8221, -5.6563)
  point P140 (138.4686, -5.8813)
  point P141 (135.9876, -6.1174)
  point P142 (133.3815, -6.3634)
  point P143 (130.6533, -6.6196)
  point P144 (127.8054, -6.8851)
  point P145 (124.8414, -7.1596)
  point P146 (121.7634, -7.4428)
  point P147 (118.5756, -7.7341)
  point P148 (115.2804, -8.0332)
  point P149 (111.8817, -8.3395)
  point P150 (108.3828, -8.6527)
  point P151 (104.787, -8.9722)
  point P152 (101.0985, -9.2974)
  point P153 (97.3206, -9.6283)
  point P154 (93.4572, -9.9643)
  point P155 (89.5122, -10.3048)
  point P156 (85.4898, -10.6492)
  point P157 (81.3936, -10.9969)
  point P158 (77.2284, -11.3479)
  point P159 (72.9975, -11.701)
  point P160 (68.7057, -12.0556)
  point P161 (64.3572, -12.4117)
  point P162 (59.9559, -12.7678)
  point P163 (55.5069, -13.1239)
  point P164 (51.0138, -13.4788)
  point P165 (46.4817, -13.8316)
  point P166 (41.9148, -14.182)
  point P167 (35.7035, -14.3277)
  point P168 (32.6946, -14.8708)
  point P169 (82.2459, 11.5043)
  point P170 (86.3364, 10.8401)
  point P171 (90.3495, 10.1732)
  point P172 (94.2816, 9.5051)
  point P173 (98.1288, 8.837)
  point P174 (101.8872, 8.171)
  point P175 (105.5538, 7.5086)
  point P176 (109.1244, 6.8507)
  point P177 (112.596, 6.1997)
  point P178 (115.9653, 5.5565)
  point P179 (119.2287, 4.9229)
  point P180 (122.3835, 4.3007)
  point P181 (125.4264, 3.6911)
  point P182 (128.3547, 3.0956)
  point P183 (131.1654, 2.5157)
  point P184 (133.8561, 1.9532)
  point P185 (136.4244, 1.4093)
  point P186 (138.8676, 0.8855)
  point P187 (141.1833, 0.383)
  point P188 (143.3697, -0.0964)
  point P189 (145.4247, -0.5518)
  point P190 (147.3462, -0.9817)
  point P191 (149.1327, -1.3852)
  point P192 (150.7821, -1.7608)
  point P193 (152.2935, -2.1073)
  point P194 (153.6651, -2.4241)
  point P195 (154.8954, -2.7103)
  point P196 (155.9838, -2.9647)
  point P197 (156.9291, -3.187)
  point P198 (157.7307, -3.376)
  point P199 (158.3871, -3.5317)
  dimension "d3" = 26.479
  dimension "d6" = 10
  dimension "d7" = 110
  dimension "d8" = 100
  dimension "d9" = 2
  dimension "d11" = 4.6493
  dimension "d25" = 7
  dimension "d26" = 3.5
  dimension "d27" = 8.379
  dimension "d28" = 30.083
  dimension "d29" = 5
  dimension "d30" = 5
  dimension "d32" = 59.8865
extrude "Extrusion2" add sketch "Sketch3" along normal blind 15 contours S1 S2 S0 L17 L16 L15 L14 L18 L19 L20
properties part number "3P.03.09.02.JS.rib 9 foam_CPY" material "Polyurethane Foam"
